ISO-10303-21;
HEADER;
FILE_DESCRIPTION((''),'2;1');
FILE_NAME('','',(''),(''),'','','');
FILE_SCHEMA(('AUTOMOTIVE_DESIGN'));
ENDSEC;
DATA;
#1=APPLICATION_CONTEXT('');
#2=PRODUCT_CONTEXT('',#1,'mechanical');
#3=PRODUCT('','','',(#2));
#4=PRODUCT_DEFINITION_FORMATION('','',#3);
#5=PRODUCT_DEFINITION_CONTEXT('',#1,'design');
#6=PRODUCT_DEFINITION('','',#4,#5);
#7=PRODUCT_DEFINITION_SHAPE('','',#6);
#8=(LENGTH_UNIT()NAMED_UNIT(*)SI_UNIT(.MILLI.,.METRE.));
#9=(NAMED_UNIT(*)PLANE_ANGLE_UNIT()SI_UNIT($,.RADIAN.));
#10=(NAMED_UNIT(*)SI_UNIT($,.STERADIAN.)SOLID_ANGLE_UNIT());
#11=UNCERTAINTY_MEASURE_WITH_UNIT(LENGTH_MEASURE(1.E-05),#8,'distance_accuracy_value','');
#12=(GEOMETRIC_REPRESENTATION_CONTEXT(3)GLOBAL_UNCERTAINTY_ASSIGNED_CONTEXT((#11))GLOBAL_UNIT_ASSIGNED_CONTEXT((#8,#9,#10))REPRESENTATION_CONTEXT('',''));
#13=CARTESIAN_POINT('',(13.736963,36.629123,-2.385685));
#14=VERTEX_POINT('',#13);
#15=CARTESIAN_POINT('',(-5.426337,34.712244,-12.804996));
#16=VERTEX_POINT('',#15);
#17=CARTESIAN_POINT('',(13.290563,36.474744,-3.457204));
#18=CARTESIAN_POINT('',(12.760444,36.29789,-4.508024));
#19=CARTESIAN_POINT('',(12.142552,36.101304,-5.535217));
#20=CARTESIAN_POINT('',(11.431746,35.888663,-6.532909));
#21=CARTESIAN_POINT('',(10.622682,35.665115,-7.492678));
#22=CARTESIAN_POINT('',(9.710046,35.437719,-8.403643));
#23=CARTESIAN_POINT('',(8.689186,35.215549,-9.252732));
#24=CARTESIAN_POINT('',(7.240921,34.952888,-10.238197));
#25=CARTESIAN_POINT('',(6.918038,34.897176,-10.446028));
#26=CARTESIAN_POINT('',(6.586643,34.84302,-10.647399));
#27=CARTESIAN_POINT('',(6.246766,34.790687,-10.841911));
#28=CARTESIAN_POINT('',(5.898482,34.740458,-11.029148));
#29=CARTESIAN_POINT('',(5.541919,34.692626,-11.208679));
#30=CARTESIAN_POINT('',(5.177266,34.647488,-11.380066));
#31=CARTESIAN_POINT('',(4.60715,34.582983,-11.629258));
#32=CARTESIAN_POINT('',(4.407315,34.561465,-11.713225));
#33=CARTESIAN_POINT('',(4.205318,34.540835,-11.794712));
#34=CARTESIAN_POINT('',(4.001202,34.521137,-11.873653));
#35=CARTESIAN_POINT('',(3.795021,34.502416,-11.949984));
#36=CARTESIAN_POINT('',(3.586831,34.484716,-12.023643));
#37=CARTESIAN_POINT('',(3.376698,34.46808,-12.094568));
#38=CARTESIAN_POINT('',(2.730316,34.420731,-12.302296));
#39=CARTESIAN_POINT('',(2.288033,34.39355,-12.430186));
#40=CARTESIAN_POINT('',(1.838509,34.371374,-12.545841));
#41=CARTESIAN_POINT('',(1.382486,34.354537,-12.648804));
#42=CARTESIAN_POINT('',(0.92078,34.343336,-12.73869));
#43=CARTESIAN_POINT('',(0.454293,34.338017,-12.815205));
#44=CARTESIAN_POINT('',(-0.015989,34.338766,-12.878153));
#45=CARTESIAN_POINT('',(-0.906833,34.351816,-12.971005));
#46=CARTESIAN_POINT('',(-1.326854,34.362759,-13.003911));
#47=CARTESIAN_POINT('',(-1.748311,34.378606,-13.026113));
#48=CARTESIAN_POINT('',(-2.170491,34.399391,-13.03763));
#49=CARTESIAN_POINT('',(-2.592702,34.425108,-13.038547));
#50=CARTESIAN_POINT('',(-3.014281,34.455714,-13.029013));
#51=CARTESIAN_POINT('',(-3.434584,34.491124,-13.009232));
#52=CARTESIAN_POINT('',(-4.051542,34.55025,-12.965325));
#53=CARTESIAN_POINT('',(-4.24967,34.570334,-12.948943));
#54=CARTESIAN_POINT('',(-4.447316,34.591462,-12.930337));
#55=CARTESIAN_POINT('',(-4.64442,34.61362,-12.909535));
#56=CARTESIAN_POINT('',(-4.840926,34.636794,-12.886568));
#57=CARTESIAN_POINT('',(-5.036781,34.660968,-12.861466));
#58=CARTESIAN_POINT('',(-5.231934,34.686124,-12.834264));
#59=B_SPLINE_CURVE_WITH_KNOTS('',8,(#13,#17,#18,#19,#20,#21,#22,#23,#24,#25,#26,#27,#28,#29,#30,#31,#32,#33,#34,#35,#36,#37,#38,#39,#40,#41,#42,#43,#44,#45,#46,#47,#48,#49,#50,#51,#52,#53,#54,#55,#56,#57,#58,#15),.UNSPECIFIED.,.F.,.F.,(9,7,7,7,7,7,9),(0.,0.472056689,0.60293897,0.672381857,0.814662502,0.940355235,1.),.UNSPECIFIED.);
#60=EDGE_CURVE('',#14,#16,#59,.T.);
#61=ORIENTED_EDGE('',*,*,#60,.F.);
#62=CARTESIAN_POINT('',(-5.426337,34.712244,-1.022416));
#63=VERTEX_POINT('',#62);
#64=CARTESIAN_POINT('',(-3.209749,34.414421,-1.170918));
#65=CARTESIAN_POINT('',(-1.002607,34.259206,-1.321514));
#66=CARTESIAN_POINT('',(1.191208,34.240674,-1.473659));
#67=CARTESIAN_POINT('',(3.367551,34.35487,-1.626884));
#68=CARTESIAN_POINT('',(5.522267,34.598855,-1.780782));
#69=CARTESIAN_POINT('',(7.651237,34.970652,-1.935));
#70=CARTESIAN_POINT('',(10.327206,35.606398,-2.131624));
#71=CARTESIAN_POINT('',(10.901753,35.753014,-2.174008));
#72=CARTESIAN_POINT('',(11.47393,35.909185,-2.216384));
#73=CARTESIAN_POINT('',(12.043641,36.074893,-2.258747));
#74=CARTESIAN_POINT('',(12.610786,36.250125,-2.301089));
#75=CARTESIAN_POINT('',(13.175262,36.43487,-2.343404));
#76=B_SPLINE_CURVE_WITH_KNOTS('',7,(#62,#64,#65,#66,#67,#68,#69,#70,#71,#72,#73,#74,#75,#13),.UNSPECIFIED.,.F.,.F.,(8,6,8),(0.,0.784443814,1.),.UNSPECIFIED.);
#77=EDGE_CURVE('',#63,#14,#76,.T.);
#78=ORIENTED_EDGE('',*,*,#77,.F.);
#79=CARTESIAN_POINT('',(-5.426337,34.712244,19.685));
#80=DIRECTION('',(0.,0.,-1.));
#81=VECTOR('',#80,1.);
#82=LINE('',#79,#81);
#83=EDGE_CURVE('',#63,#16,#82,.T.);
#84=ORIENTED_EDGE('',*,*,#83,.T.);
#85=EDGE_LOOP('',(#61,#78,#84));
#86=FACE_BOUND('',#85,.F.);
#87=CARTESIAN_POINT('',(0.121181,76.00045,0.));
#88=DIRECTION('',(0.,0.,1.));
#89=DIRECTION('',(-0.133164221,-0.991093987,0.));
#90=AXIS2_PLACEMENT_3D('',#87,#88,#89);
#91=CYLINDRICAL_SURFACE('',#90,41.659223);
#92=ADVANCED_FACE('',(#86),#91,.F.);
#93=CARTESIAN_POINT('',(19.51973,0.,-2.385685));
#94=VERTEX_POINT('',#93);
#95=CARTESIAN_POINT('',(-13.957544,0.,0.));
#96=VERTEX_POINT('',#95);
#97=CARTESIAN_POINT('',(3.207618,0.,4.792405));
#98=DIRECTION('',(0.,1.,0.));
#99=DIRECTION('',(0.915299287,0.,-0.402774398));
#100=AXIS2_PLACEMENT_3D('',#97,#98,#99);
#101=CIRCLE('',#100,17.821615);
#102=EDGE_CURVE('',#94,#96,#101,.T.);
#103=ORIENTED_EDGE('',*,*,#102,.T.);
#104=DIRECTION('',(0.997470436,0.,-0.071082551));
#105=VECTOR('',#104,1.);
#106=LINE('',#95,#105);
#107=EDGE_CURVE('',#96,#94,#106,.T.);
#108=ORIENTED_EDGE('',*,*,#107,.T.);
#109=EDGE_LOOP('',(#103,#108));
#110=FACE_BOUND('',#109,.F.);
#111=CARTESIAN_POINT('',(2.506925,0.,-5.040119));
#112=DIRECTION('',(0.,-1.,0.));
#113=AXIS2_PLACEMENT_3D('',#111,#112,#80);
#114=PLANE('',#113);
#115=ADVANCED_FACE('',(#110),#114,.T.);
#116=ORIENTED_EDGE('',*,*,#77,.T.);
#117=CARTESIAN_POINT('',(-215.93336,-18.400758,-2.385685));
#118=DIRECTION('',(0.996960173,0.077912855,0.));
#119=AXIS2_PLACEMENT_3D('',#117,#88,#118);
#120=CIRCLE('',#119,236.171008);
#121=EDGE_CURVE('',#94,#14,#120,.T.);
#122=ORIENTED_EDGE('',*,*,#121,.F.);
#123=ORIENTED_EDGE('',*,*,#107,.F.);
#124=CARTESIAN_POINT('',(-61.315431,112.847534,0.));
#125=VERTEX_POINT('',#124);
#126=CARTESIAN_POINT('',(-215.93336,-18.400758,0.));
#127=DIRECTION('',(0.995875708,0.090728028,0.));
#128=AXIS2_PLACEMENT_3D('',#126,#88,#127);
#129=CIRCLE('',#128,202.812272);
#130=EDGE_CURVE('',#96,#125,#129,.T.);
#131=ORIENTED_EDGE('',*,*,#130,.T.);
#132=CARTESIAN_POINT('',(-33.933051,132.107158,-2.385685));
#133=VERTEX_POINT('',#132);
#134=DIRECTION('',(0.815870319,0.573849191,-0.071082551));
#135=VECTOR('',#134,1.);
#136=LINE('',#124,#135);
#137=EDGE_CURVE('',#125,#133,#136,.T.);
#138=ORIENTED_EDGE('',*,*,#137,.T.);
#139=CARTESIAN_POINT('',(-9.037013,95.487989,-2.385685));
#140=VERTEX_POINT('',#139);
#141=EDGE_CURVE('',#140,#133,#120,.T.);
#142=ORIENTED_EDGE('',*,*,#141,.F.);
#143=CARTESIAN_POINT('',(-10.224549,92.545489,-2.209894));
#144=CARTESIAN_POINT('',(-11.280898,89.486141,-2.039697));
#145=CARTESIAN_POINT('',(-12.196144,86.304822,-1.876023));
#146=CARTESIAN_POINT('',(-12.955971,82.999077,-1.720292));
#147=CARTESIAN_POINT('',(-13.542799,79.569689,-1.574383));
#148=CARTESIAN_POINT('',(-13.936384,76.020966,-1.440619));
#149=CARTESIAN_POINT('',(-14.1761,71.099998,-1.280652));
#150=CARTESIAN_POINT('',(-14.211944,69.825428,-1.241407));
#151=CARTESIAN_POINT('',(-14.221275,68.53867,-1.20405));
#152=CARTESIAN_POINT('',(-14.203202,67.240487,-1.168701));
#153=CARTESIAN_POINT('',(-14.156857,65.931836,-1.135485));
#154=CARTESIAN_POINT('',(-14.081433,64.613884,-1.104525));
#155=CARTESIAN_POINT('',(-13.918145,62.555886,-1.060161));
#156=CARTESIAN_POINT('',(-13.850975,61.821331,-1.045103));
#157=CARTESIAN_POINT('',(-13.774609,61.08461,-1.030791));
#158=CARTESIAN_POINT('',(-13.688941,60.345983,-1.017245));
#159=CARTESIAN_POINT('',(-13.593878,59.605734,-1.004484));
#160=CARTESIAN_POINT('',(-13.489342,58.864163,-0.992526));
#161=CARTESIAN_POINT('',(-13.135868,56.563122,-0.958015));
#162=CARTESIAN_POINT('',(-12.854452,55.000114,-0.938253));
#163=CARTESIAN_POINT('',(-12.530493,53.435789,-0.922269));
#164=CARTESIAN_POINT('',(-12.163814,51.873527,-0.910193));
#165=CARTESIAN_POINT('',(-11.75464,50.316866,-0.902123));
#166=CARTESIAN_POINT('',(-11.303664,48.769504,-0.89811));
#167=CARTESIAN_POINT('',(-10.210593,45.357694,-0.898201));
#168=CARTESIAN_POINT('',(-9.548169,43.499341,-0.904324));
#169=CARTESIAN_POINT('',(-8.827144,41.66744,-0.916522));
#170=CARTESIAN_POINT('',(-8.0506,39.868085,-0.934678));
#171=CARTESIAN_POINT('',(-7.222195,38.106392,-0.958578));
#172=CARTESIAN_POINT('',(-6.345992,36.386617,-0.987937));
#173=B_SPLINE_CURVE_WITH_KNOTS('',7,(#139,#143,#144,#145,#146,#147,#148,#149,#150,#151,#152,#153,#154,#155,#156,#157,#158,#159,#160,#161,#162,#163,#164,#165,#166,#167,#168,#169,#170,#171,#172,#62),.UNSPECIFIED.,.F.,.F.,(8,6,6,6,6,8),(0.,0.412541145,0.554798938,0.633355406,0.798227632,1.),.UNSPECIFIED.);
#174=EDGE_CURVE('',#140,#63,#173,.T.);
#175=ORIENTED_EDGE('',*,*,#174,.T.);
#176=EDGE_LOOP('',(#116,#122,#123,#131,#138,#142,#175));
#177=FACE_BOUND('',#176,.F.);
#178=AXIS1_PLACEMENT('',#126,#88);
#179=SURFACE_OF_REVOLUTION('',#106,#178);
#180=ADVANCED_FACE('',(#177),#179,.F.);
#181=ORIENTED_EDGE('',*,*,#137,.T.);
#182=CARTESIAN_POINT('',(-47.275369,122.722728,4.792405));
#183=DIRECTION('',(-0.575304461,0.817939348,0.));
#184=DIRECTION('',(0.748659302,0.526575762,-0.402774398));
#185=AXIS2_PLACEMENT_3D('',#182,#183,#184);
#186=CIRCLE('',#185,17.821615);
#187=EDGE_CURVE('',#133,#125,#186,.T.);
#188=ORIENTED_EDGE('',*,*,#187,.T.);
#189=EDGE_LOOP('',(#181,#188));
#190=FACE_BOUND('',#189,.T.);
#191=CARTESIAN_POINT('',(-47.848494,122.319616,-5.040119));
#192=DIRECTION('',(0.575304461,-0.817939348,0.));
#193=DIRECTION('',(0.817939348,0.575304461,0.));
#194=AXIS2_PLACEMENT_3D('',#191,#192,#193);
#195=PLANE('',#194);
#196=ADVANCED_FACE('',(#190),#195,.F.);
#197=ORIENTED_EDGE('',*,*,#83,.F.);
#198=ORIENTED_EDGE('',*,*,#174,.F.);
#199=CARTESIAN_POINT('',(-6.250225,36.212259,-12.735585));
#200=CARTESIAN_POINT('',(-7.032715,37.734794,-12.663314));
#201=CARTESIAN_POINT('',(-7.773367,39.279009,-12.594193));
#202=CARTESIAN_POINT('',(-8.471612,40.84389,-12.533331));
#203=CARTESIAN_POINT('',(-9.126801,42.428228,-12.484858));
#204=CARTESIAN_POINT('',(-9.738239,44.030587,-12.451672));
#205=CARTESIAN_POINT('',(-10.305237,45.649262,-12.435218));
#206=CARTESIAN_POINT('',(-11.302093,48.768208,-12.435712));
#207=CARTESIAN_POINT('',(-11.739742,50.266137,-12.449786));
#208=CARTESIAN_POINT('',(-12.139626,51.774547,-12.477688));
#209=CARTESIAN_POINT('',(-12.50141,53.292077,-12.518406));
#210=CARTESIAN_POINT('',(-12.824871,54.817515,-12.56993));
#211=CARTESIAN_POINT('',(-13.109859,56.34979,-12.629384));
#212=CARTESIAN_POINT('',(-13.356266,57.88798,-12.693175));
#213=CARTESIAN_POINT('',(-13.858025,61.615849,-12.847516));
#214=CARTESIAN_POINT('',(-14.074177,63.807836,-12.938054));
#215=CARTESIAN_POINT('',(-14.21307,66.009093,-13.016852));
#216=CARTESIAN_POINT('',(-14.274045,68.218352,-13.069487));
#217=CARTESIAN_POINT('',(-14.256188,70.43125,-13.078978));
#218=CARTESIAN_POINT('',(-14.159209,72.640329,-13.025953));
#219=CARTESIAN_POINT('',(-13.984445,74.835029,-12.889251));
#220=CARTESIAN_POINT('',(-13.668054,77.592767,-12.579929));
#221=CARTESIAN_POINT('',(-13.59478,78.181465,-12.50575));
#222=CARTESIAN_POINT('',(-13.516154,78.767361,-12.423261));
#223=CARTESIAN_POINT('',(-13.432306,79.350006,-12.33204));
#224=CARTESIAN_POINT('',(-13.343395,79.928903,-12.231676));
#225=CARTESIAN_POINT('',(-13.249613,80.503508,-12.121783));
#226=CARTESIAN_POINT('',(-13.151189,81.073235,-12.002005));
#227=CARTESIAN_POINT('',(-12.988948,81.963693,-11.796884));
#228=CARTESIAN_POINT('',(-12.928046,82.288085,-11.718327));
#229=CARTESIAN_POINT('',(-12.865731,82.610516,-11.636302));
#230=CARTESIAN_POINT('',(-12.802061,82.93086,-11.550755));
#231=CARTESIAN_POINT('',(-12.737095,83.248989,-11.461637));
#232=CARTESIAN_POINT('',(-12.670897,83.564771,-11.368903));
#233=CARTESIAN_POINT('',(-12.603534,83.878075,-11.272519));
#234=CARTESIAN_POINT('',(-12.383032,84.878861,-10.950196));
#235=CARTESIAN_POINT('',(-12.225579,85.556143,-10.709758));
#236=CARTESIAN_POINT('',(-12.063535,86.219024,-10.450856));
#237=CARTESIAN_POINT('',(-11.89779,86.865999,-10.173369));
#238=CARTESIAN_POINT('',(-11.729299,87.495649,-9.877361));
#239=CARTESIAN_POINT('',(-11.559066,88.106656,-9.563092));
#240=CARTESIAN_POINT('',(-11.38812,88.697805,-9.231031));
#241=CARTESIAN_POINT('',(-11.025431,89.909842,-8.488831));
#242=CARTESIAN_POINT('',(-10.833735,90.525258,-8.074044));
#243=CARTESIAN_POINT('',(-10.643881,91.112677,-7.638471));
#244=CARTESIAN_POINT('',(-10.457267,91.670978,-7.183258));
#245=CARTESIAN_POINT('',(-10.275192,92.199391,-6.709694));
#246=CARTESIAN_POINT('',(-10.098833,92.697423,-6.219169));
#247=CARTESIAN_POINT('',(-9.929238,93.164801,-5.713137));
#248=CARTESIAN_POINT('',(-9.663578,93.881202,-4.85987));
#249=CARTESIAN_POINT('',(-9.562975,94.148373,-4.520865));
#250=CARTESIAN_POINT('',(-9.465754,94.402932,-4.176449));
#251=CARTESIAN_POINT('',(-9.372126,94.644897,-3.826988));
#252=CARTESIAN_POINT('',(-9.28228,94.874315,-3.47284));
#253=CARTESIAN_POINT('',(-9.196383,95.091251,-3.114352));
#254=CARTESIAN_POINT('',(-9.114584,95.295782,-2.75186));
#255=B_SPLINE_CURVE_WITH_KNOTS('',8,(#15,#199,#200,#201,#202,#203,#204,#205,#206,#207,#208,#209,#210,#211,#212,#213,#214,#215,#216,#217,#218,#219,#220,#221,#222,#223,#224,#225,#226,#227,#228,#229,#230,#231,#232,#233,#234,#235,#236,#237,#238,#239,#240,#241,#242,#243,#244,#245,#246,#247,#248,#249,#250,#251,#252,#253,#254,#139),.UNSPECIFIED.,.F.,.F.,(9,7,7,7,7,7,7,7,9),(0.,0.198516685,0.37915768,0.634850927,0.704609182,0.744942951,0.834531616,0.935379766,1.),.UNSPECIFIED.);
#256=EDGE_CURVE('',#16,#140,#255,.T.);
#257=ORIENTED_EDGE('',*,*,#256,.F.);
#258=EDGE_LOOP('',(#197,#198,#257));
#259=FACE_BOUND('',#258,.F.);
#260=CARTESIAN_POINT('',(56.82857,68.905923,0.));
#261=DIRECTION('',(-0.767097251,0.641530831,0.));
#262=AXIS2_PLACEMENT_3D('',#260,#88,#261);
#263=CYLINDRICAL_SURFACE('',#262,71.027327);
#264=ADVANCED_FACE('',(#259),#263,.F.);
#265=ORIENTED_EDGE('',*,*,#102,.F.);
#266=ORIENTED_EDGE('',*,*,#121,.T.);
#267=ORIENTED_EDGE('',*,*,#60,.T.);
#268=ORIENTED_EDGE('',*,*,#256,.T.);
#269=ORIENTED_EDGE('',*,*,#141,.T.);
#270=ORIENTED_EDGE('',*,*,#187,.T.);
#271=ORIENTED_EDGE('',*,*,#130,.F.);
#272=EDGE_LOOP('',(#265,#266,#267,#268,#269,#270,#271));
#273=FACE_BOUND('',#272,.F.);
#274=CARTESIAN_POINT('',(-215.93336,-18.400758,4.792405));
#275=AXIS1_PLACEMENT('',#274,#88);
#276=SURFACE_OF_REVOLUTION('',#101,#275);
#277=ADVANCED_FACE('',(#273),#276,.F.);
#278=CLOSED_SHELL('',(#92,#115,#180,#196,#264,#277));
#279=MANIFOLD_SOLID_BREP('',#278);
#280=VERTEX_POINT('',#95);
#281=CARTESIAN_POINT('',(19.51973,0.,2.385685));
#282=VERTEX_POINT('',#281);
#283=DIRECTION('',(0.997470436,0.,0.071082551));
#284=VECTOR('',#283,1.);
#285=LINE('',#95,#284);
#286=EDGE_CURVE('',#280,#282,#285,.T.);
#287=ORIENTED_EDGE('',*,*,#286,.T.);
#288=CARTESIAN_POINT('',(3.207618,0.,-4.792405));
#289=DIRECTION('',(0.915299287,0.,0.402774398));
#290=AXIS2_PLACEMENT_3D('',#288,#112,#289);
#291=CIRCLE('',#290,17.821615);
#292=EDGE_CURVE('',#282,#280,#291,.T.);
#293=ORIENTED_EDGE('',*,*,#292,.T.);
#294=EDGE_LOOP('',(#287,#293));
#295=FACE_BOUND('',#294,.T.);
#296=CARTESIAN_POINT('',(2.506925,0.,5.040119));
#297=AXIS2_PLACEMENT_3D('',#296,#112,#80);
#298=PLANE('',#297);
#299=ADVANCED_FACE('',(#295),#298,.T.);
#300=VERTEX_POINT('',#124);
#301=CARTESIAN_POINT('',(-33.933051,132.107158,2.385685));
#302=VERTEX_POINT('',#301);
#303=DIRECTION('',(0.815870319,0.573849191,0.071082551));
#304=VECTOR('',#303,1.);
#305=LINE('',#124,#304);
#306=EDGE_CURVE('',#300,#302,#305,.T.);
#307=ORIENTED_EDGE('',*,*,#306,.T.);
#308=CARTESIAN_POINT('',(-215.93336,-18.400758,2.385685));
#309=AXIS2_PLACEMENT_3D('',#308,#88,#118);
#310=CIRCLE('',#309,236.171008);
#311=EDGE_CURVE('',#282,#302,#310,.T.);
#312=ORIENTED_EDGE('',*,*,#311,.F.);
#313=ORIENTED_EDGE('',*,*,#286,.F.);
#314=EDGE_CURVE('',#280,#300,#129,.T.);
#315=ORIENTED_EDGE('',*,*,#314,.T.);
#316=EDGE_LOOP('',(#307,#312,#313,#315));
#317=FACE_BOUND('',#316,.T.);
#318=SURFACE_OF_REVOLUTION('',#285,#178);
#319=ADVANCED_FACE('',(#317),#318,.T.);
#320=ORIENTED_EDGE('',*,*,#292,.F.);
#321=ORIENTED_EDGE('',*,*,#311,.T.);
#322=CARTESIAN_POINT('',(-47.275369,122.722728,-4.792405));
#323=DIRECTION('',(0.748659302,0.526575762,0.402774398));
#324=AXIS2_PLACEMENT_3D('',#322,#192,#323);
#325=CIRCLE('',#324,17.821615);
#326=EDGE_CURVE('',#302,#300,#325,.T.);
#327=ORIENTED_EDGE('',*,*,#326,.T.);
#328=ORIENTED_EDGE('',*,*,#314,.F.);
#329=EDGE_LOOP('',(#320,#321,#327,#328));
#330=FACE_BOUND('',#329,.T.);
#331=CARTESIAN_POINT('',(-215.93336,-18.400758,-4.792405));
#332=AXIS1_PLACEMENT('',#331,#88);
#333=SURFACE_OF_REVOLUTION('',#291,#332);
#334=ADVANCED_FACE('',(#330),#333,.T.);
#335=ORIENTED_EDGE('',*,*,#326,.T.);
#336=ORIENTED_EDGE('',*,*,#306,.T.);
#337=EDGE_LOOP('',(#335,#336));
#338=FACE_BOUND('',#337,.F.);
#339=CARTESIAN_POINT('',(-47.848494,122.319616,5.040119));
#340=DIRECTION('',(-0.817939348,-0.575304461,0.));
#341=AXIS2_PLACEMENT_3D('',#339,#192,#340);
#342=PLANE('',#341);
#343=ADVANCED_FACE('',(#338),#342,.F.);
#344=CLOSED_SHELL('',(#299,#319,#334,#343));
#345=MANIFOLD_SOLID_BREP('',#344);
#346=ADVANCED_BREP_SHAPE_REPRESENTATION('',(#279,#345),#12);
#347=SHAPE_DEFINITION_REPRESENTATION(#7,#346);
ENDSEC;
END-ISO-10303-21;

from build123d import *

# Parameters (mm, degrees)
F5_DEPTH = 19.685


with BuildPart() as f2:
    # F2: sweep along a path in F1
    with BuildLine(Plane.XY) as f2_path:
        ThreePointArc((2.5794103276, 0), (-13.1552361752, 65.0705018825), (-47.7892048657, 122.361317277))
    # F0 (on Front) → F2 (sweep)
    with BuildSketch(Plane.XZ):
        with BuildLine():
            Line((-13.9575442299, 0), (19.5197295398, 2.3856847547))
            ThreePointArc((19.5197295398, 2.3856847547), (1.9408124217, 12.9841284446), (-13.9575442299, 0))
        make_face()
    sweep(path=f2_path.line)


with BuildPart() as f3_1:
    # F3: instance of F2
    add(f2.part.mirror(Plane.XY))

    # F4 (on Top) → F5 (cut, symmetric)
    with BuildSketch(Plane.XY):
        with BuildLine():
            ThreePointArc((41.7517051101, 74.454382062), (28.6847679393, 100.99919665), (2.3437023629, 114.472143352))
            ThreePointArc((2.3437023629, 114.472143352), (-13.8641041279, 75.7926532577), (-5.4263374768, 34.7122438252))
            ThreePointArc((-5.4263374768, 34.7122438252), (26.9606147491, 44.1392558641), (41.7517051101, 74.454382062))
        make_face()
    extrude(amount=F5_DEPTH, both=True, mode=Mode.SUBTRACT)


solid = Compound([f2.part, f3_1.part])
